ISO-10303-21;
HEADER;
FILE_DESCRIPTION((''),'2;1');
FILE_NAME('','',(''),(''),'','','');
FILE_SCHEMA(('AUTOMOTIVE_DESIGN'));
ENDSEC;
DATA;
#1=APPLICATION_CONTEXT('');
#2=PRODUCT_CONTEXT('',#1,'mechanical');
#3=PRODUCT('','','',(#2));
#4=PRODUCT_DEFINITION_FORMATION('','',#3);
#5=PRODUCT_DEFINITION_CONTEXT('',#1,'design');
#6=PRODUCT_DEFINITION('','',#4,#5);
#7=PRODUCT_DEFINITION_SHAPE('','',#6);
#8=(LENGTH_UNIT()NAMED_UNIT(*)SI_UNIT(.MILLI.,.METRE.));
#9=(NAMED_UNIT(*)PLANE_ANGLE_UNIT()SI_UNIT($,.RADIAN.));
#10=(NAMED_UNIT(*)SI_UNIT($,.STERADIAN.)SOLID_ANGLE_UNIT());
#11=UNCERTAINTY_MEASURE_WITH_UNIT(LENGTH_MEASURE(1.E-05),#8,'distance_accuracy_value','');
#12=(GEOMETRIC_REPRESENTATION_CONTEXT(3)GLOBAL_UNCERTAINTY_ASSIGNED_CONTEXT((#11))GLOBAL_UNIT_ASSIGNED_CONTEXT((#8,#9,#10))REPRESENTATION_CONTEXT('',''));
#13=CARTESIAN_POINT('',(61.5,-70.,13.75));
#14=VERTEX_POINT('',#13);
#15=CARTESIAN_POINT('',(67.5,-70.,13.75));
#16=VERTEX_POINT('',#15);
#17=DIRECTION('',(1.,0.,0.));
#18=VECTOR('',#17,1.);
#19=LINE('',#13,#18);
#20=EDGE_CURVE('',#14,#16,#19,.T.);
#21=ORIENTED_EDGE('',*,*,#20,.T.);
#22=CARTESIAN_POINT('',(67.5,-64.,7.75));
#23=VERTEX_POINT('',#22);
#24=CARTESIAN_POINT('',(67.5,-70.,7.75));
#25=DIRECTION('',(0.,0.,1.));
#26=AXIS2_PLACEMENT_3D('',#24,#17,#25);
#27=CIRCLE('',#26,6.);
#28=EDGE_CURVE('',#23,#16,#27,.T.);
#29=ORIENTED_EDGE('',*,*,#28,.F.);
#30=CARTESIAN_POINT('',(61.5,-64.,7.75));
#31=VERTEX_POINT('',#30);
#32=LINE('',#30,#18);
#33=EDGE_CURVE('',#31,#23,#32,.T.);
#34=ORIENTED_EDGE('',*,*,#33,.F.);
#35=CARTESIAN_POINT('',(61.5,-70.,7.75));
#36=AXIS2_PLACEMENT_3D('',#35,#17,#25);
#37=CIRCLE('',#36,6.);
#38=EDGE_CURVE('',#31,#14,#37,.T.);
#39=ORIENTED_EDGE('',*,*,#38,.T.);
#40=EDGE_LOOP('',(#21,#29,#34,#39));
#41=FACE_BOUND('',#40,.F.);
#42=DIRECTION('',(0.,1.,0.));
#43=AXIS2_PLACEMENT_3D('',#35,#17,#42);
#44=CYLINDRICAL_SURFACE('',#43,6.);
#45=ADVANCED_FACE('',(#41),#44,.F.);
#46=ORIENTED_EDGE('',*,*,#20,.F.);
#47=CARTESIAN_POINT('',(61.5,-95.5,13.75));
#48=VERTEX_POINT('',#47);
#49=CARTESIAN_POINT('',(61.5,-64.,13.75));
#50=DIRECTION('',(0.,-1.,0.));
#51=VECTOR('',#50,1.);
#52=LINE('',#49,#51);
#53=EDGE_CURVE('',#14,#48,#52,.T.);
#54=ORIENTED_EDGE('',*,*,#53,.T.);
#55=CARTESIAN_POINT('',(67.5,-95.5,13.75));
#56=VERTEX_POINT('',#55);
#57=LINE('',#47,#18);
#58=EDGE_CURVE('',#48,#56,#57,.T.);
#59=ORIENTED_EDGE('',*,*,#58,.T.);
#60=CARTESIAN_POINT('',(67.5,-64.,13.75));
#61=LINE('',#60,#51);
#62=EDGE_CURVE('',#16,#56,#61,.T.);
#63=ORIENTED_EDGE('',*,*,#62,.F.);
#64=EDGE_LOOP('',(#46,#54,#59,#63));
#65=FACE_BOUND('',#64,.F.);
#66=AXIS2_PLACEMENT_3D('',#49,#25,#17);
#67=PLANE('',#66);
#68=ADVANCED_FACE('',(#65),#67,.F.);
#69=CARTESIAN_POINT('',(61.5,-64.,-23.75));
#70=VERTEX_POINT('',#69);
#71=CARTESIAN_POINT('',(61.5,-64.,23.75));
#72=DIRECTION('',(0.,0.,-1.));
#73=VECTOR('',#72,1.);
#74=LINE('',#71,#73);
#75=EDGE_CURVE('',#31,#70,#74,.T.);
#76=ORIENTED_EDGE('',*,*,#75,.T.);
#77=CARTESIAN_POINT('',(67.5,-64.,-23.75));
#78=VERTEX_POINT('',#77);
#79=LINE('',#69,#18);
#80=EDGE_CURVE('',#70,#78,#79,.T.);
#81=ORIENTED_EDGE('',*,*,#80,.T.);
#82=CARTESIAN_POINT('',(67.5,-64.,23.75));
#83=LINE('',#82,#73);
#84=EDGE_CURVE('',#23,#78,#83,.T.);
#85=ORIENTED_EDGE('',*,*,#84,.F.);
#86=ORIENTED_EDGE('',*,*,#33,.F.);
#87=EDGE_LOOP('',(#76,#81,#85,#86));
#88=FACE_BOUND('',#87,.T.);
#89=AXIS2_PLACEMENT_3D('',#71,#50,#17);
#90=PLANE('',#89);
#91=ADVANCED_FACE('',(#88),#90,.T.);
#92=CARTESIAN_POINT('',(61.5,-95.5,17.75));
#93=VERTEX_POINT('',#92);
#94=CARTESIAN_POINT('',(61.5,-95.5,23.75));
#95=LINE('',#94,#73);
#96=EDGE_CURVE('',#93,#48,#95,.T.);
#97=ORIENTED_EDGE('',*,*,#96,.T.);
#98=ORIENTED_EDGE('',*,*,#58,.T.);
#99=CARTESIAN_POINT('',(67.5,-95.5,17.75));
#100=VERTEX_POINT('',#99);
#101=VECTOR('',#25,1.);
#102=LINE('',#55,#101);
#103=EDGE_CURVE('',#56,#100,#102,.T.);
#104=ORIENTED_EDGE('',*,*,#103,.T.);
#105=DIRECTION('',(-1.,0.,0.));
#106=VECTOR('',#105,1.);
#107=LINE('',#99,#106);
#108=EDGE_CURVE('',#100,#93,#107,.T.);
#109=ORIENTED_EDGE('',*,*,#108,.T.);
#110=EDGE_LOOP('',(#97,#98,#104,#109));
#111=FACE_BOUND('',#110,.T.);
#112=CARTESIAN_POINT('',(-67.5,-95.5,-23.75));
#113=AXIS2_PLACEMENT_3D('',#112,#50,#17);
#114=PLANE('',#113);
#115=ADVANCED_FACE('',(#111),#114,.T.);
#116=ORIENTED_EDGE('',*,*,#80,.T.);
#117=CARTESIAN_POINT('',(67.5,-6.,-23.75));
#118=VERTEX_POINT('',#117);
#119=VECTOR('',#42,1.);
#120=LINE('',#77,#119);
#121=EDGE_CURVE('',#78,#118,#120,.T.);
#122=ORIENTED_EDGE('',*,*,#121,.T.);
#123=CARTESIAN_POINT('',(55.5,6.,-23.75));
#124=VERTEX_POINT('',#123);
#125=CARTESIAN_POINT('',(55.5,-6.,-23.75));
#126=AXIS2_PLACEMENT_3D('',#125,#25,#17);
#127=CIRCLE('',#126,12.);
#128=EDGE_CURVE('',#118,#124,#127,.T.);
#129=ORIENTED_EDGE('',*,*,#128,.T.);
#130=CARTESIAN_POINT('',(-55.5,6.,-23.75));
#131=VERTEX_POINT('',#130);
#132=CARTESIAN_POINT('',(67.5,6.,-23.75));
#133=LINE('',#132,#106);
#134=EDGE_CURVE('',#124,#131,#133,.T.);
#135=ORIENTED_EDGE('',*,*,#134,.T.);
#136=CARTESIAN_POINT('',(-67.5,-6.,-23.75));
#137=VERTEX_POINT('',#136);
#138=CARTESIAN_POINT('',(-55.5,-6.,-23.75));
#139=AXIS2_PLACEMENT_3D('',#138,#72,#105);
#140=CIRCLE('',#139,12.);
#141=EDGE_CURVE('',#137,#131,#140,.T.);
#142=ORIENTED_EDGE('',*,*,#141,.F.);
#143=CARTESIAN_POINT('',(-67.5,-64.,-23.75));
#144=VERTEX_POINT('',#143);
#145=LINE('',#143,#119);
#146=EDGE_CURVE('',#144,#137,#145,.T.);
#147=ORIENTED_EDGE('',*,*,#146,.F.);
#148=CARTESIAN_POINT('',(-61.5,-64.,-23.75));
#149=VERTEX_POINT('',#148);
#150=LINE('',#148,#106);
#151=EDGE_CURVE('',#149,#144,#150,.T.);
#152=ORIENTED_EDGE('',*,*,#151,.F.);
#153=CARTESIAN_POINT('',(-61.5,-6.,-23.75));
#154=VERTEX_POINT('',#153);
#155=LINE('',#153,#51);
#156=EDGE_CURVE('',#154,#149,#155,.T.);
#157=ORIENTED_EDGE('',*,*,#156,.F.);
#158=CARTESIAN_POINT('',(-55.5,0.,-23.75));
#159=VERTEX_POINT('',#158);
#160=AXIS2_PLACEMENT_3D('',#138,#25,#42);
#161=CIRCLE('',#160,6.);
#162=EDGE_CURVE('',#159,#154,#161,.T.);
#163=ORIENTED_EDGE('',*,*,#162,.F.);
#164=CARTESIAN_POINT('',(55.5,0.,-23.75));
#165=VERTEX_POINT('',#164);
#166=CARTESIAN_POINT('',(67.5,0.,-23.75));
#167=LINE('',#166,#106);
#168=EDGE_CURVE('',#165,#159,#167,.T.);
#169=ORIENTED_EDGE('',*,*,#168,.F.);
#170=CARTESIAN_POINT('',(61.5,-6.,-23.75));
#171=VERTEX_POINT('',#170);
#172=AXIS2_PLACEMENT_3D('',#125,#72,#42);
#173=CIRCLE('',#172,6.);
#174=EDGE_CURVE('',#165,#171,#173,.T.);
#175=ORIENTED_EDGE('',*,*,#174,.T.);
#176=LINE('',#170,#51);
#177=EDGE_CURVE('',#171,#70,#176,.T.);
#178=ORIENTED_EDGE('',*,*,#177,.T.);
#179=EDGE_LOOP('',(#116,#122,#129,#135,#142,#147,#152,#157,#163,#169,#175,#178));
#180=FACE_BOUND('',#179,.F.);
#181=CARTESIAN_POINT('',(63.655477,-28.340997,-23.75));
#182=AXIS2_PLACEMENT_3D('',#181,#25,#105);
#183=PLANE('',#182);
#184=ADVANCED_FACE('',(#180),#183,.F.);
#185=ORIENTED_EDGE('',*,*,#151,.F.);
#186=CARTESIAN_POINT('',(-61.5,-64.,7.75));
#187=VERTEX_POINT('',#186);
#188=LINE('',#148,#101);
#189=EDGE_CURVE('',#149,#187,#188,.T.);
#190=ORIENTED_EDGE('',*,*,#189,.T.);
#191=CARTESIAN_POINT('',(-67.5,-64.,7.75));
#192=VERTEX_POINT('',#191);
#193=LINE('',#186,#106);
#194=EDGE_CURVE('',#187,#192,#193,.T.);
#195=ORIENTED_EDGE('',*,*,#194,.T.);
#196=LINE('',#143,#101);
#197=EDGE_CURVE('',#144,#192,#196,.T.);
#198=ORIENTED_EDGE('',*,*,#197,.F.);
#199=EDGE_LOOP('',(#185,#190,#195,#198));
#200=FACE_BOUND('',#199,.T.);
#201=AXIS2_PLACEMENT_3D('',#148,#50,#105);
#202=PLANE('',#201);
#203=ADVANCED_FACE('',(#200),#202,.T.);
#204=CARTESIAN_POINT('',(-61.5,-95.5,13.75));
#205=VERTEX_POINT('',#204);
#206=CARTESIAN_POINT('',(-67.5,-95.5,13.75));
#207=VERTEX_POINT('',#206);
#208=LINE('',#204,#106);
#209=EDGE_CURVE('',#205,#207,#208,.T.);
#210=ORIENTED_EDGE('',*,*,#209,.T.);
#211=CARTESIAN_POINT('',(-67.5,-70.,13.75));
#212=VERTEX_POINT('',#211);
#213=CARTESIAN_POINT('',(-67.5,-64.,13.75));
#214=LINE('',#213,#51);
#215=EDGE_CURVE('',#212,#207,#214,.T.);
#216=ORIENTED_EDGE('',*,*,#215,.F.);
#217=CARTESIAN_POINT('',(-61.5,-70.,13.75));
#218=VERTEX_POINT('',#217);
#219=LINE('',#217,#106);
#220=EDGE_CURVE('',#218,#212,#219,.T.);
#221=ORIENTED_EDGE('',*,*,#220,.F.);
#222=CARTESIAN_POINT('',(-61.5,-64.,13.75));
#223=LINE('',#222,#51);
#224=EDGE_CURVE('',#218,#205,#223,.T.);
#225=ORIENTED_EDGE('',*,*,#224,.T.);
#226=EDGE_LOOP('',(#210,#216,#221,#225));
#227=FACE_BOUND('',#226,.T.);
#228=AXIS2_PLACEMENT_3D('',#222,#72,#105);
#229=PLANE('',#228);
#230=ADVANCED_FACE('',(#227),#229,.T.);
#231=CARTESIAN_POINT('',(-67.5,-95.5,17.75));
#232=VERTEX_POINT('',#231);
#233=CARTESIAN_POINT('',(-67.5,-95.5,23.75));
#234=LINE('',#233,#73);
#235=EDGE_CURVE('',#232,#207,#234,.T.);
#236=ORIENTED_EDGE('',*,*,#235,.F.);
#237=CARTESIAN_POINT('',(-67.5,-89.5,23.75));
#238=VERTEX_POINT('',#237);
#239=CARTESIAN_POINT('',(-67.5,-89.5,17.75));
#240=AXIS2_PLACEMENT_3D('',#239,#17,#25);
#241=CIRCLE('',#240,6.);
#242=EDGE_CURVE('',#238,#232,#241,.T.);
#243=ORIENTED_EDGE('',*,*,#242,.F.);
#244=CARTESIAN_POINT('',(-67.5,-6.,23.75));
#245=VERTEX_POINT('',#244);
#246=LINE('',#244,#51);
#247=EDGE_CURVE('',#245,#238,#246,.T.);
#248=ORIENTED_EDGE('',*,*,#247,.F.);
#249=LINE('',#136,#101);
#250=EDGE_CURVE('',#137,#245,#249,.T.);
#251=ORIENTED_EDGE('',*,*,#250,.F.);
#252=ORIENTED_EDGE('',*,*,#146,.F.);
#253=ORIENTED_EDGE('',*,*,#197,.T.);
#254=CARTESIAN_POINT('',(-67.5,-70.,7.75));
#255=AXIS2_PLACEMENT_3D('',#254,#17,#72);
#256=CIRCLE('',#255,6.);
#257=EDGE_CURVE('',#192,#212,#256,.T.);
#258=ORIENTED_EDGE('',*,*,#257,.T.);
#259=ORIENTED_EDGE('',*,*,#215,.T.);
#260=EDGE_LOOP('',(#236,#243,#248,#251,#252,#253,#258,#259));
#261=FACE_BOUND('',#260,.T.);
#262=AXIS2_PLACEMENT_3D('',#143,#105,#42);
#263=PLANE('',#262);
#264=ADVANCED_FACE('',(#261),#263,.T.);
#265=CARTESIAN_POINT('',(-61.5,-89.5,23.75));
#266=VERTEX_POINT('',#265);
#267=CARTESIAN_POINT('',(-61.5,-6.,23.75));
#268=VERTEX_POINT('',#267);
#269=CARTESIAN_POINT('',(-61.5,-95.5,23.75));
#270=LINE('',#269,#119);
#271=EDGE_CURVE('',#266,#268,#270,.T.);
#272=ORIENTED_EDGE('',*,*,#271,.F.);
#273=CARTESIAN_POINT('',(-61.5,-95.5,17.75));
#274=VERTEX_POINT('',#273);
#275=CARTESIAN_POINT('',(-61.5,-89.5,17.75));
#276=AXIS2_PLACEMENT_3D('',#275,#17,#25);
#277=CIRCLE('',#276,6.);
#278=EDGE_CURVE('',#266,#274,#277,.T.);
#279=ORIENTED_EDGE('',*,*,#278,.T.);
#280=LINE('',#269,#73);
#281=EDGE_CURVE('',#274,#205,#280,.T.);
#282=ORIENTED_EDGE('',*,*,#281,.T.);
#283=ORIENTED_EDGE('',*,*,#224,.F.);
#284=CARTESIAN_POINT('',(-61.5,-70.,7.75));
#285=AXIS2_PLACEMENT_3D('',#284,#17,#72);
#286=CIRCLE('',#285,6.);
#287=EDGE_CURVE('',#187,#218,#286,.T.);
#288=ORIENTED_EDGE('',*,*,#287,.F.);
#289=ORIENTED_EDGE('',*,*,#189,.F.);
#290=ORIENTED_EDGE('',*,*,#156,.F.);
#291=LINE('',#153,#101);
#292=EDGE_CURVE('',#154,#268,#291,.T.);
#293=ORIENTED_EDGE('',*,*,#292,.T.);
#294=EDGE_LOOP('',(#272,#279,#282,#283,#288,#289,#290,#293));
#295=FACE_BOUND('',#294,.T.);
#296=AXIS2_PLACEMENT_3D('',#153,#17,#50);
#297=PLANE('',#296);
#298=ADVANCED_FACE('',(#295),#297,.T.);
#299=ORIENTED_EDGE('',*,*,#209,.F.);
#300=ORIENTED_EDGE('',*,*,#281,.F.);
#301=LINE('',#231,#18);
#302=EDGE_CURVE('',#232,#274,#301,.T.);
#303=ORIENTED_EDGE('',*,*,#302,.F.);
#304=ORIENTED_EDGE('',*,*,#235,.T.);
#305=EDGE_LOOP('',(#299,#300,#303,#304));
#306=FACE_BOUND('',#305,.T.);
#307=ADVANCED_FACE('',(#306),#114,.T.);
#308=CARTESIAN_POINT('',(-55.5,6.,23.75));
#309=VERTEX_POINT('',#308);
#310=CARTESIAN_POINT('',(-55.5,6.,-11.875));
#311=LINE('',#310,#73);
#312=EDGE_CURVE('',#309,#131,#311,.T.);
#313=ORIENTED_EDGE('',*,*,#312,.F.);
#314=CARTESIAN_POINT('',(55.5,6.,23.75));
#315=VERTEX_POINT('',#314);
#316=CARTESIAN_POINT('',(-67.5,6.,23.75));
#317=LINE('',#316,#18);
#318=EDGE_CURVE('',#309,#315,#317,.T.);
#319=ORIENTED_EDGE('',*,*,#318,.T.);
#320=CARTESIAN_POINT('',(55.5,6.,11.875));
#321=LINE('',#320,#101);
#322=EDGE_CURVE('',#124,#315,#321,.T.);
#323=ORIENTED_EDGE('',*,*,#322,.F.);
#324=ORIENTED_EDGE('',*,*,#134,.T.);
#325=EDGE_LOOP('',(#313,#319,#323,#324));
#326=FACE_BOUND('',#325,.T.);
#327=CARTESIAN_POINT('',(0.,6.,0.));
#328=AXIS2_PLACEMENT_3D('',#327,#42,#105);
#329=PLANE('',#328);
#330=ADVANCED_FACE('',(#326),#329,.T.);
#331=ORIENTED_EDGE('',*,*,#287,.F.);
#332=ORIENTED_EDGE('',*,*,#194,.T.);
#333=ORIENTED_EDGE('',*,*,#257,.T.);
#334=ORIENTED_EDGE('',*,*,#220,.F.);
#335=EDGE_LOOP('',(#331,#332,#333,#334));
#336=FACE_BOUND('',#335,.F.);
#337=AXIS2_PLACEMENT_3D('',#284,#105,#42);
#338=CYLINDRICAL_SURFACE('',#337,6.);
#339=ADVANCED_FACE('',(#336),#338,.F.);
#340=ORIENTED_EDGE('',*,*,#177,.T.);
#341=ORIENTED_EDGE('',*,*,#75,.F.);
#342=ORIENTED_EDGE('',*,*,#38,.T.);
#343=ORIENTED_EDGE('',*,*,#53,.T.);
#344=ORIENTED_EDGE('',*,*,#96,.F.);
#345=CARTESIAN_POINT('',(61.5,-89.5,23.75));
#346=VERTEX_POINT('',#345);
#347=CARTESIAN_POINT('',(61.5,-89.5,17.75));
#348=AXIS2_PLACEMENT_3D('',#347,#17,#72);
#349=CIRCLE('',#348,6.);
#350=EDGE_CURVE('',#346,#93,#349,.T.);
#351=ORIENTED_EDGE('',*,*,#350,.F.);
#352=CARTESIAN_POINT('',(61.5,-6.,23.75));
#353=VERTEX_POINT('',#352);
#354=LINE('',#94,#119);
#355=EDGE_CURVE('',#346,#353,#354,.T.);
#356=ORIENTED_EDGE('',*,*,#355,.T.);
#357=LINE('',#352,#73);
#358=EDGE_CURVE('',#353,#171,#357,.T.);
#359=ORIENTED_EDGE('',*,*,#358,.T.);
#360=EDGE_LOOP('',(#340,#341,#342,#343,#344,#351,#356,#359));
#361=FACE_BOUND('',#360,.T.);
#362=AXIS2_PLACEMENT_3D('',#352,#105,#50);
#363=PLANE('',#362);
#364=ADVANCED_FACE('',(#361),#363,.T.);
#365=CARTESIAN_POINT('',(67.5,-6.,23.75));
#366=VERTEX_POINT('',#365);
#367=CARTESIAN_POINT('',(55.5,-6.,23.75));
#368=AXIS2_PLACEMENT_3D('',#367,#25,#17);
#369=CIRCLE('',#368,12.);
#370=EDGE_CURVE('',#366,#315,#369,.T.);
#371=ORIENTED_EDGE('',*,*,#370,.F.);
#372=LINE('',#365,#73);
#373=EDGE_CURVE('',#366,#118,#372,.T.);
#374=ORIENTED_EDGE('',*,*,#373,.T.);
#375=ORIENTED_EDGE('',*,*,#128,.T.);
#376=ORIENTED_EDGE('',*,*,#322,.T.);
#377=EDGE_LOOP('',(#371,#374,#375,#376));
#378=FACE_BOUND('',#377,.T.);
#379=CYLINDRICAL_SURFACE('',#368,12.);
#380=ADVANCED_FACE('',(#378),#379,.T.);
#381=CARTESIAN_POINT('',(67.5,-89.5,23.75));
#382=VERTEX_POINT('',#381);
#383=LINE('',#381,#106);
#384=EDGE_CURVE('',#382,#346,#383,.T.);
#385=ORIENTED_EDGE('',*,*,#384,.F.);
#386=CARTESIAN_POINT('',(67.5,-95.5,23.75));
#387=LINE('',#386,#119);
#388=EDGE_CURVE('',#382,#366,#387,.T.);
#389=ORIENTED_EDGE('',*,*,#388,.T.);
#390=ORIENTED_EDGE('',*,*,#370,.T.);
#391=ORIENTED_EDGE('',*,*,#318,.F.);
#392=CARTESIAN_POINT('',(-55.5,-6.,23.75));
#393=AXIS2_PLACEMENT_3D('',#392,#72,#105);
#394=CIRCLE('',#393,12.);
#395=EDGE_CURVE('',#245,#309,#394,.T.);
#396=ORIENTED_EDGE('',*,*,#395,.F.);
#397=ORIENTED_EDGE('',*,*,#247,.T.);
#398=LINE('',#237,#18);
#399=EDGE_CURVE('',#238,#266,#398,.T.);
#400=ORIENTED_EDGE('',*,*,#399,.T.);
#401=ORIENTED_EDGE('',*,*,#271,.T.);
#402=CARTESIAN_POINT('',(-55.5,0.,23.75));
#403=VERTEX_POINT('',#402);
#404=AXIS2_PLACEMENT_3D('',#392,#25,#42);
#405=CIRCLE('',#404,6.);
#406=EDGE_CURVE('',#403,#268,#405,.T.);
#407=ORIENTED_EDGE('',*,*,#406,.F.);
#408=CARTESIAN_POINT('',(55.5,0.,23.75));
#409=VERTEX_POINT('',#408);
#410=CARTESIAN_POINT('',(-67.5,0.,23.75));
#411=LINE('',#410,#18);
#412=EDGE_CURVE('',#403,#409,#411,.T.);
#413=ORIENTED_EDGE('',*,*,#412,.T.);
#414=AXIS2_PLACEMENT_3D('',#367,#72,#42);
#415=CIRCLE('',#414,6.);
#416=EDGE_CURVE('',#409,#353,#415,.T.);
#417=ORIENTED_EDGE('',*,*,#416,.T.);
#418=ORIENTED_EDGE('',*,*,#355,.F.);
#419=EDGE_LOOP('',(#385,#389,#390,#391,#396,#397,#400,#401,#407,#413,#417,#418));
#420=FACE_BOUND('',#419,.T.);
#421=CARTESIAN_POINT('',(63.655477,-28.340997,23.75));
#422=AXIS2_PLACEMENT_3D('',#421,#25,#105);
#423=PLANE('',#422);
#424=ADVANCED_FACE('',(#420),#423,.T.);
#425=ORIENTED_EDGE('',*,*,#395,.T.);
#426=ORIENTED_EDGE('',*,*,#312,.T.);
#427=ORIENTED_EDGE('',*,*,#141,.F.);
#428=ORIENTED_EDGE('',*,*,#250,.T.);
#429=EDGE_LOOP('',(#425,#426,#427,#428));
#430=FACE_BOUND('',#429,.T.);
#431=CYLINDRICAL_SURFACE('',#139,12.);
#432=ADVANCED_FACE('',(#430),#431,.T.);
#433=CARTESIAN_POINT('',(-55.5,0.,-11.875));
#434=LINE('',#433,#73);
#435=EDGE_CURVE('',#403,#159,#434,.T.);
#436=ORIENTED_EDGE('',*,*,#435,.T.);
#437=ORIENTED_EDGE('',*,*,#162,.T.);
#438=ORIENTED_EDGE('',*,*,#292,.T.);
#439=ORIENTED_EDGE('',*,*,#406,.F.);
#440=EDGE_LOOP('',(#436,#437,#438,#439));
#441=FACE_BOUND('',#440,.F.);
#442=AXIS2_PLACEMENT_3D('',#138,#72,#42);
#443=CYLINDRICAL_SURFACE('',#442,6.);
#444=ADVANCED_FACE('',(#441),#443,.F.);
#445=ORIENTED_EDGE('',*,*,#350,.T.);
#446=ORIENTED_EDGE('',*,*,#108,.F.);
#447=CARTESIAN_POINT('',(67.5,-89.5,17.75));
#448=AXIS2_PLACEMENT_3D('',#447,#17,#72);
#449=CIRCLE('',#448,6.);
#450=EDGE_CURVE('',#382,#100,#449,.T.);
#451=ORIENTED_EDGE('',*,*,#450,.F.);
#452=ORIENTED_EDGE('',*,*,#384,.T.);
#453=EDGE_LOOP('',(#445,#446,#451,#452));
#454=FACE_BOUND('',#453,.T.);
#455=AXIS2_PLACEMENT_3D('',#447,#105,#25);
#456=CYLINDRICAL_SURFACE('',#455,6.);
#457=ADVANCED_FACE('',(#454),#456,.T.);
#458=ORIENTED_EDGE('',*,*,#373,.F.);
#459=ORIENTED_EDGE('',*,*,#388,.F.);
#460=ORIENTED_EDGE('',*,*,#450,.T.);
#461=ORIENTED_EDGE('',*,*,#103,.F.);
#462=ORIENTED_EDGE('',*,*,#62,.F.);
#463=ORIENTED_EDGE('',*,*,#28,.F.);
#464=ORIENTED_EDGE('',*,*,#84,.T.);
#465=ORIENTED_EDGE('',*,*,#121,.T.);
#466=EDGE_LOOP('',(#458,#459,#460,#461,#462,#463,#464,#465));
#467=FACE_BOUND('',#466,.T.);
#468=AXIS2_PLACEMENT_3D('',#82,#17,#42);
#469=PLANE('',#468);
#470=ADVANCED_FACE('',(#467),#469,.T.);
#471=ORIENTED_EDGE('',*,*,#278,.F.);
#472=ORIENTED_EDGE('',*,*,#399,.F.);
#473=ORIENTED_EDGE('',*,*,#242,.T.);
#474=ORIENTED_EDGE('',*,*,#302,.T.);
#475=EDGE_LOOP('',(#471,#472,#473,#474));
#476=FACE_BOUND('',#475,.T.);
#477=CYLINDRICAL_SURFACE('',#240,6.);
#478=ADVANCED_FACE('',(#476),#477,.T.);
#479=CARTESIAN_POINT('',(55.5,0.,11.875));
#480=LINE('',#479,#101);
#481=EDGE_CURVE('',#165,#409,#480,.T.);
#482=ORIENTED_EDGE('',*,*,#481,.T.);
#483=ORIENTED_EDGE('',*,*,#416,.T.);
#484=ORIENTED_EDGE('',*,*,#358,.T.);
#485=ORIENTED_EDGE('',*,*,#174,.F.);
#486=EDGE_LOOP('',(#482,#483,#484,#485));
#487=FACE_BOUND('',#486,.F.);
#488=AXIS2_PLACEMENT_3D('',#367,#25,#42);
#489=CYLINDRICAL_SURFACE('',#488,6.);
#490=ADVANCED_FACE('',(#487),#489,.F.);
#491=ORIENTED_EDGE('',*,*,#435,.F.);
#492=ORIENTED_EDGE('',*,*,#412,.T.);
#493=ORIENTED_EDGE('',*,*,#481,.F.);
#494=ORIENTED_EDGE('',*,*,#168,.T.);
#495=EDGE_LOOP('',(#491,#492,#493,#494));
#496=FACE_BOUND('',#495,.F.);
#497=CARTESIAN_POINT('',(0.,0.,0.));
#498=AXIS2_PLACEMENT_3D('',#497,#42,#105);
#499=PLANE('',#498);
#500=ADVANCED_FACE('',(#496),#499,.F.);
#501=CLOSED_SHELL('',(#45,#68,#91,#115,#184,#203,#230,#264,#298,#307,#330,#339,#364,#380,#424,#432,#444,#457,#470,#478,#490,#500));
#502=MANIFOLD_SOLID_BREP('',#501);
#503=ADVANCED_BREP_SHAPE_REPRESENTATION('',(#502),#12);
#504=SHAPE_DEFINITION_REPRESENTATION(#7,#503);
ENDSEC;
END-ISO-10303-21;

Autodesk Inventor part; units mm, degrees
ref_plane "YZ Plane" through (0, 0, 0) normal (1, 0, 0) x (0, 1, 0)
ref_plane "XZ Plane" through (0, 0, 0) normal (0, 1, 0) x (-1, 0, 0)
ref_plane "XY Plane" through (0, 0, 0) normal (0, 0, 1) x (1, 0, 0)
sketch "Náčrt2" plane through (0, 0, 0) normal (0, 1, 0) x (-1, 0, 0)
  line L0 (67.5, 23.75) -> (-67.5, 23.75)
  line L1 (-67.5, 23.75) -> (-67.5, -23.75)
  line L2 (-67.5, -23.75) -> (67.5, -23.75)
  line L3 (67.5, -23.75) -> (67.5, 23.75)
  point P0 (0, 0)
  point P1 (67.5, 0)
  point P2 (0, 23.75)
  dimension "d0" = 135
  dimension "d1" = 47.5
extrude "Vysunutí1" add sketch "Náčrt2" along normal blind 6
sketch "Náčrt3" plane through (61.5, 6, 23.75) normal (1, 0, 0) x (0, 1, 0)
  line L0 (0, -47.5) -> (0, 0)
  line L1 (0, 0) -> (-70, 0)
  line L2 (-70, 0) -> (-70, -47.5)
  line L3 (-70, -47.5) -> (0, -47.5)
edge flange "Obruba1" height 70 angle 90 thickness 6 bend radius 6 thickness toward (1, 0, 0) relief tear relief width 6 relief depth 3 corner gap 6 corner form 0 edges at (67.5, 0, 0) (-67.5, 0, 0) wall of the first edge with corners at (61.5, 6, -23.75) (61.5, 6, 23.75) (61.5, -64, 23.75) (61.5, -64, -23.75)
bend "Ohyb1"
corner "Roh1"
sketch "Náčrt4" plane through (-67.5, -64, -23.75) normal (0, -1, 0) x (1, 0, 0)
  line L0 (0, 47.5) -> (0, 0) construction
  line L1 (6, 0) -> (0, 0) construction
  line L2 (6, 47.5) -> (6, 0) construction
  line L3 (6, 47.5) -> (0, 47.5) construction
  line L4 (135, 0) -> (135, 47.5) construction
  line L5 (129, 47.5) -> (135, 47.5) construction
  line L6 (129, 0) -> (129, 47.5) construction
  line L7 (129, 0) -> (135, 0) construction
  line L8 (0, 47.5) -> (0, 0) projected
  line L9 (0, 47.5) -> (6, 47.5)
  line L10 (6, 47.5) -> (6, 37.5)
  line L11 (6, 37.5) -> (0, 37.5)
  line L12 (0, 37.5) -> (0, 47.5)
  line L13 (135, 47.5) -> (129, 47.5)
  line L14 (129, 47.5) -> (129, 37.5)
  line L15 (129, 37.5) -> (135, 37.5)
  line L16 (135, 37.5) -> (135, 47.5)
  point P0 (67.5, 23.75)
  dimension "d18" = 10
extrude "Vysunutí2" add sketch "Náčrt4" along normal blind 31.5
fillet "Zaoblení2" radius 6 4 edges at (64.5, -64, 13.75) (-64.5, -64, 13.75) (-64.5, -95.5, 23.75) (64.5, -95.5, 23.75)
equation "\"d4\" = ŠířkaVýštipu"
equation "\"d5\" = HloubkaVýštipu"
equation "\"d6\" = MinimálníZbytek"
equation "\"d7\" = PoloměrOhybu"
equation "\"d10\" = PoloměrOhybu"
equation "\"d11\" = VelikostRohovéhoVýštipu"
equation "\"d12\" = VelikostMezery"
equation "\"d13\" = VelikostJacobihoPoloměru"
equation "\"PoloměrOhybu\" = Tloušťka"
equation "\"ŠířkaVýštipu\" = Tloušťka"
equation "\"HloubkaVýštipu\" = 0.5 * Tloušťka"
equation "\"VelikostRohovéhoVýštipu\" = 4 * Tloušťka"
equation "\"MinimálníZbytek\" = 2 * Tloušťka"
equation "\"PřechodovýPoloměr\" = PoloměrOhybu"
equation "\"VelikostJacobihoPoloměru\" = PoloměrOhybu"
equation "\"VelikostMezery\" = Tloušťka"
equation "\"Tloušťka\" = 6"
properties part number "DD_KVD_002_05" material "Nerezová ocel"
